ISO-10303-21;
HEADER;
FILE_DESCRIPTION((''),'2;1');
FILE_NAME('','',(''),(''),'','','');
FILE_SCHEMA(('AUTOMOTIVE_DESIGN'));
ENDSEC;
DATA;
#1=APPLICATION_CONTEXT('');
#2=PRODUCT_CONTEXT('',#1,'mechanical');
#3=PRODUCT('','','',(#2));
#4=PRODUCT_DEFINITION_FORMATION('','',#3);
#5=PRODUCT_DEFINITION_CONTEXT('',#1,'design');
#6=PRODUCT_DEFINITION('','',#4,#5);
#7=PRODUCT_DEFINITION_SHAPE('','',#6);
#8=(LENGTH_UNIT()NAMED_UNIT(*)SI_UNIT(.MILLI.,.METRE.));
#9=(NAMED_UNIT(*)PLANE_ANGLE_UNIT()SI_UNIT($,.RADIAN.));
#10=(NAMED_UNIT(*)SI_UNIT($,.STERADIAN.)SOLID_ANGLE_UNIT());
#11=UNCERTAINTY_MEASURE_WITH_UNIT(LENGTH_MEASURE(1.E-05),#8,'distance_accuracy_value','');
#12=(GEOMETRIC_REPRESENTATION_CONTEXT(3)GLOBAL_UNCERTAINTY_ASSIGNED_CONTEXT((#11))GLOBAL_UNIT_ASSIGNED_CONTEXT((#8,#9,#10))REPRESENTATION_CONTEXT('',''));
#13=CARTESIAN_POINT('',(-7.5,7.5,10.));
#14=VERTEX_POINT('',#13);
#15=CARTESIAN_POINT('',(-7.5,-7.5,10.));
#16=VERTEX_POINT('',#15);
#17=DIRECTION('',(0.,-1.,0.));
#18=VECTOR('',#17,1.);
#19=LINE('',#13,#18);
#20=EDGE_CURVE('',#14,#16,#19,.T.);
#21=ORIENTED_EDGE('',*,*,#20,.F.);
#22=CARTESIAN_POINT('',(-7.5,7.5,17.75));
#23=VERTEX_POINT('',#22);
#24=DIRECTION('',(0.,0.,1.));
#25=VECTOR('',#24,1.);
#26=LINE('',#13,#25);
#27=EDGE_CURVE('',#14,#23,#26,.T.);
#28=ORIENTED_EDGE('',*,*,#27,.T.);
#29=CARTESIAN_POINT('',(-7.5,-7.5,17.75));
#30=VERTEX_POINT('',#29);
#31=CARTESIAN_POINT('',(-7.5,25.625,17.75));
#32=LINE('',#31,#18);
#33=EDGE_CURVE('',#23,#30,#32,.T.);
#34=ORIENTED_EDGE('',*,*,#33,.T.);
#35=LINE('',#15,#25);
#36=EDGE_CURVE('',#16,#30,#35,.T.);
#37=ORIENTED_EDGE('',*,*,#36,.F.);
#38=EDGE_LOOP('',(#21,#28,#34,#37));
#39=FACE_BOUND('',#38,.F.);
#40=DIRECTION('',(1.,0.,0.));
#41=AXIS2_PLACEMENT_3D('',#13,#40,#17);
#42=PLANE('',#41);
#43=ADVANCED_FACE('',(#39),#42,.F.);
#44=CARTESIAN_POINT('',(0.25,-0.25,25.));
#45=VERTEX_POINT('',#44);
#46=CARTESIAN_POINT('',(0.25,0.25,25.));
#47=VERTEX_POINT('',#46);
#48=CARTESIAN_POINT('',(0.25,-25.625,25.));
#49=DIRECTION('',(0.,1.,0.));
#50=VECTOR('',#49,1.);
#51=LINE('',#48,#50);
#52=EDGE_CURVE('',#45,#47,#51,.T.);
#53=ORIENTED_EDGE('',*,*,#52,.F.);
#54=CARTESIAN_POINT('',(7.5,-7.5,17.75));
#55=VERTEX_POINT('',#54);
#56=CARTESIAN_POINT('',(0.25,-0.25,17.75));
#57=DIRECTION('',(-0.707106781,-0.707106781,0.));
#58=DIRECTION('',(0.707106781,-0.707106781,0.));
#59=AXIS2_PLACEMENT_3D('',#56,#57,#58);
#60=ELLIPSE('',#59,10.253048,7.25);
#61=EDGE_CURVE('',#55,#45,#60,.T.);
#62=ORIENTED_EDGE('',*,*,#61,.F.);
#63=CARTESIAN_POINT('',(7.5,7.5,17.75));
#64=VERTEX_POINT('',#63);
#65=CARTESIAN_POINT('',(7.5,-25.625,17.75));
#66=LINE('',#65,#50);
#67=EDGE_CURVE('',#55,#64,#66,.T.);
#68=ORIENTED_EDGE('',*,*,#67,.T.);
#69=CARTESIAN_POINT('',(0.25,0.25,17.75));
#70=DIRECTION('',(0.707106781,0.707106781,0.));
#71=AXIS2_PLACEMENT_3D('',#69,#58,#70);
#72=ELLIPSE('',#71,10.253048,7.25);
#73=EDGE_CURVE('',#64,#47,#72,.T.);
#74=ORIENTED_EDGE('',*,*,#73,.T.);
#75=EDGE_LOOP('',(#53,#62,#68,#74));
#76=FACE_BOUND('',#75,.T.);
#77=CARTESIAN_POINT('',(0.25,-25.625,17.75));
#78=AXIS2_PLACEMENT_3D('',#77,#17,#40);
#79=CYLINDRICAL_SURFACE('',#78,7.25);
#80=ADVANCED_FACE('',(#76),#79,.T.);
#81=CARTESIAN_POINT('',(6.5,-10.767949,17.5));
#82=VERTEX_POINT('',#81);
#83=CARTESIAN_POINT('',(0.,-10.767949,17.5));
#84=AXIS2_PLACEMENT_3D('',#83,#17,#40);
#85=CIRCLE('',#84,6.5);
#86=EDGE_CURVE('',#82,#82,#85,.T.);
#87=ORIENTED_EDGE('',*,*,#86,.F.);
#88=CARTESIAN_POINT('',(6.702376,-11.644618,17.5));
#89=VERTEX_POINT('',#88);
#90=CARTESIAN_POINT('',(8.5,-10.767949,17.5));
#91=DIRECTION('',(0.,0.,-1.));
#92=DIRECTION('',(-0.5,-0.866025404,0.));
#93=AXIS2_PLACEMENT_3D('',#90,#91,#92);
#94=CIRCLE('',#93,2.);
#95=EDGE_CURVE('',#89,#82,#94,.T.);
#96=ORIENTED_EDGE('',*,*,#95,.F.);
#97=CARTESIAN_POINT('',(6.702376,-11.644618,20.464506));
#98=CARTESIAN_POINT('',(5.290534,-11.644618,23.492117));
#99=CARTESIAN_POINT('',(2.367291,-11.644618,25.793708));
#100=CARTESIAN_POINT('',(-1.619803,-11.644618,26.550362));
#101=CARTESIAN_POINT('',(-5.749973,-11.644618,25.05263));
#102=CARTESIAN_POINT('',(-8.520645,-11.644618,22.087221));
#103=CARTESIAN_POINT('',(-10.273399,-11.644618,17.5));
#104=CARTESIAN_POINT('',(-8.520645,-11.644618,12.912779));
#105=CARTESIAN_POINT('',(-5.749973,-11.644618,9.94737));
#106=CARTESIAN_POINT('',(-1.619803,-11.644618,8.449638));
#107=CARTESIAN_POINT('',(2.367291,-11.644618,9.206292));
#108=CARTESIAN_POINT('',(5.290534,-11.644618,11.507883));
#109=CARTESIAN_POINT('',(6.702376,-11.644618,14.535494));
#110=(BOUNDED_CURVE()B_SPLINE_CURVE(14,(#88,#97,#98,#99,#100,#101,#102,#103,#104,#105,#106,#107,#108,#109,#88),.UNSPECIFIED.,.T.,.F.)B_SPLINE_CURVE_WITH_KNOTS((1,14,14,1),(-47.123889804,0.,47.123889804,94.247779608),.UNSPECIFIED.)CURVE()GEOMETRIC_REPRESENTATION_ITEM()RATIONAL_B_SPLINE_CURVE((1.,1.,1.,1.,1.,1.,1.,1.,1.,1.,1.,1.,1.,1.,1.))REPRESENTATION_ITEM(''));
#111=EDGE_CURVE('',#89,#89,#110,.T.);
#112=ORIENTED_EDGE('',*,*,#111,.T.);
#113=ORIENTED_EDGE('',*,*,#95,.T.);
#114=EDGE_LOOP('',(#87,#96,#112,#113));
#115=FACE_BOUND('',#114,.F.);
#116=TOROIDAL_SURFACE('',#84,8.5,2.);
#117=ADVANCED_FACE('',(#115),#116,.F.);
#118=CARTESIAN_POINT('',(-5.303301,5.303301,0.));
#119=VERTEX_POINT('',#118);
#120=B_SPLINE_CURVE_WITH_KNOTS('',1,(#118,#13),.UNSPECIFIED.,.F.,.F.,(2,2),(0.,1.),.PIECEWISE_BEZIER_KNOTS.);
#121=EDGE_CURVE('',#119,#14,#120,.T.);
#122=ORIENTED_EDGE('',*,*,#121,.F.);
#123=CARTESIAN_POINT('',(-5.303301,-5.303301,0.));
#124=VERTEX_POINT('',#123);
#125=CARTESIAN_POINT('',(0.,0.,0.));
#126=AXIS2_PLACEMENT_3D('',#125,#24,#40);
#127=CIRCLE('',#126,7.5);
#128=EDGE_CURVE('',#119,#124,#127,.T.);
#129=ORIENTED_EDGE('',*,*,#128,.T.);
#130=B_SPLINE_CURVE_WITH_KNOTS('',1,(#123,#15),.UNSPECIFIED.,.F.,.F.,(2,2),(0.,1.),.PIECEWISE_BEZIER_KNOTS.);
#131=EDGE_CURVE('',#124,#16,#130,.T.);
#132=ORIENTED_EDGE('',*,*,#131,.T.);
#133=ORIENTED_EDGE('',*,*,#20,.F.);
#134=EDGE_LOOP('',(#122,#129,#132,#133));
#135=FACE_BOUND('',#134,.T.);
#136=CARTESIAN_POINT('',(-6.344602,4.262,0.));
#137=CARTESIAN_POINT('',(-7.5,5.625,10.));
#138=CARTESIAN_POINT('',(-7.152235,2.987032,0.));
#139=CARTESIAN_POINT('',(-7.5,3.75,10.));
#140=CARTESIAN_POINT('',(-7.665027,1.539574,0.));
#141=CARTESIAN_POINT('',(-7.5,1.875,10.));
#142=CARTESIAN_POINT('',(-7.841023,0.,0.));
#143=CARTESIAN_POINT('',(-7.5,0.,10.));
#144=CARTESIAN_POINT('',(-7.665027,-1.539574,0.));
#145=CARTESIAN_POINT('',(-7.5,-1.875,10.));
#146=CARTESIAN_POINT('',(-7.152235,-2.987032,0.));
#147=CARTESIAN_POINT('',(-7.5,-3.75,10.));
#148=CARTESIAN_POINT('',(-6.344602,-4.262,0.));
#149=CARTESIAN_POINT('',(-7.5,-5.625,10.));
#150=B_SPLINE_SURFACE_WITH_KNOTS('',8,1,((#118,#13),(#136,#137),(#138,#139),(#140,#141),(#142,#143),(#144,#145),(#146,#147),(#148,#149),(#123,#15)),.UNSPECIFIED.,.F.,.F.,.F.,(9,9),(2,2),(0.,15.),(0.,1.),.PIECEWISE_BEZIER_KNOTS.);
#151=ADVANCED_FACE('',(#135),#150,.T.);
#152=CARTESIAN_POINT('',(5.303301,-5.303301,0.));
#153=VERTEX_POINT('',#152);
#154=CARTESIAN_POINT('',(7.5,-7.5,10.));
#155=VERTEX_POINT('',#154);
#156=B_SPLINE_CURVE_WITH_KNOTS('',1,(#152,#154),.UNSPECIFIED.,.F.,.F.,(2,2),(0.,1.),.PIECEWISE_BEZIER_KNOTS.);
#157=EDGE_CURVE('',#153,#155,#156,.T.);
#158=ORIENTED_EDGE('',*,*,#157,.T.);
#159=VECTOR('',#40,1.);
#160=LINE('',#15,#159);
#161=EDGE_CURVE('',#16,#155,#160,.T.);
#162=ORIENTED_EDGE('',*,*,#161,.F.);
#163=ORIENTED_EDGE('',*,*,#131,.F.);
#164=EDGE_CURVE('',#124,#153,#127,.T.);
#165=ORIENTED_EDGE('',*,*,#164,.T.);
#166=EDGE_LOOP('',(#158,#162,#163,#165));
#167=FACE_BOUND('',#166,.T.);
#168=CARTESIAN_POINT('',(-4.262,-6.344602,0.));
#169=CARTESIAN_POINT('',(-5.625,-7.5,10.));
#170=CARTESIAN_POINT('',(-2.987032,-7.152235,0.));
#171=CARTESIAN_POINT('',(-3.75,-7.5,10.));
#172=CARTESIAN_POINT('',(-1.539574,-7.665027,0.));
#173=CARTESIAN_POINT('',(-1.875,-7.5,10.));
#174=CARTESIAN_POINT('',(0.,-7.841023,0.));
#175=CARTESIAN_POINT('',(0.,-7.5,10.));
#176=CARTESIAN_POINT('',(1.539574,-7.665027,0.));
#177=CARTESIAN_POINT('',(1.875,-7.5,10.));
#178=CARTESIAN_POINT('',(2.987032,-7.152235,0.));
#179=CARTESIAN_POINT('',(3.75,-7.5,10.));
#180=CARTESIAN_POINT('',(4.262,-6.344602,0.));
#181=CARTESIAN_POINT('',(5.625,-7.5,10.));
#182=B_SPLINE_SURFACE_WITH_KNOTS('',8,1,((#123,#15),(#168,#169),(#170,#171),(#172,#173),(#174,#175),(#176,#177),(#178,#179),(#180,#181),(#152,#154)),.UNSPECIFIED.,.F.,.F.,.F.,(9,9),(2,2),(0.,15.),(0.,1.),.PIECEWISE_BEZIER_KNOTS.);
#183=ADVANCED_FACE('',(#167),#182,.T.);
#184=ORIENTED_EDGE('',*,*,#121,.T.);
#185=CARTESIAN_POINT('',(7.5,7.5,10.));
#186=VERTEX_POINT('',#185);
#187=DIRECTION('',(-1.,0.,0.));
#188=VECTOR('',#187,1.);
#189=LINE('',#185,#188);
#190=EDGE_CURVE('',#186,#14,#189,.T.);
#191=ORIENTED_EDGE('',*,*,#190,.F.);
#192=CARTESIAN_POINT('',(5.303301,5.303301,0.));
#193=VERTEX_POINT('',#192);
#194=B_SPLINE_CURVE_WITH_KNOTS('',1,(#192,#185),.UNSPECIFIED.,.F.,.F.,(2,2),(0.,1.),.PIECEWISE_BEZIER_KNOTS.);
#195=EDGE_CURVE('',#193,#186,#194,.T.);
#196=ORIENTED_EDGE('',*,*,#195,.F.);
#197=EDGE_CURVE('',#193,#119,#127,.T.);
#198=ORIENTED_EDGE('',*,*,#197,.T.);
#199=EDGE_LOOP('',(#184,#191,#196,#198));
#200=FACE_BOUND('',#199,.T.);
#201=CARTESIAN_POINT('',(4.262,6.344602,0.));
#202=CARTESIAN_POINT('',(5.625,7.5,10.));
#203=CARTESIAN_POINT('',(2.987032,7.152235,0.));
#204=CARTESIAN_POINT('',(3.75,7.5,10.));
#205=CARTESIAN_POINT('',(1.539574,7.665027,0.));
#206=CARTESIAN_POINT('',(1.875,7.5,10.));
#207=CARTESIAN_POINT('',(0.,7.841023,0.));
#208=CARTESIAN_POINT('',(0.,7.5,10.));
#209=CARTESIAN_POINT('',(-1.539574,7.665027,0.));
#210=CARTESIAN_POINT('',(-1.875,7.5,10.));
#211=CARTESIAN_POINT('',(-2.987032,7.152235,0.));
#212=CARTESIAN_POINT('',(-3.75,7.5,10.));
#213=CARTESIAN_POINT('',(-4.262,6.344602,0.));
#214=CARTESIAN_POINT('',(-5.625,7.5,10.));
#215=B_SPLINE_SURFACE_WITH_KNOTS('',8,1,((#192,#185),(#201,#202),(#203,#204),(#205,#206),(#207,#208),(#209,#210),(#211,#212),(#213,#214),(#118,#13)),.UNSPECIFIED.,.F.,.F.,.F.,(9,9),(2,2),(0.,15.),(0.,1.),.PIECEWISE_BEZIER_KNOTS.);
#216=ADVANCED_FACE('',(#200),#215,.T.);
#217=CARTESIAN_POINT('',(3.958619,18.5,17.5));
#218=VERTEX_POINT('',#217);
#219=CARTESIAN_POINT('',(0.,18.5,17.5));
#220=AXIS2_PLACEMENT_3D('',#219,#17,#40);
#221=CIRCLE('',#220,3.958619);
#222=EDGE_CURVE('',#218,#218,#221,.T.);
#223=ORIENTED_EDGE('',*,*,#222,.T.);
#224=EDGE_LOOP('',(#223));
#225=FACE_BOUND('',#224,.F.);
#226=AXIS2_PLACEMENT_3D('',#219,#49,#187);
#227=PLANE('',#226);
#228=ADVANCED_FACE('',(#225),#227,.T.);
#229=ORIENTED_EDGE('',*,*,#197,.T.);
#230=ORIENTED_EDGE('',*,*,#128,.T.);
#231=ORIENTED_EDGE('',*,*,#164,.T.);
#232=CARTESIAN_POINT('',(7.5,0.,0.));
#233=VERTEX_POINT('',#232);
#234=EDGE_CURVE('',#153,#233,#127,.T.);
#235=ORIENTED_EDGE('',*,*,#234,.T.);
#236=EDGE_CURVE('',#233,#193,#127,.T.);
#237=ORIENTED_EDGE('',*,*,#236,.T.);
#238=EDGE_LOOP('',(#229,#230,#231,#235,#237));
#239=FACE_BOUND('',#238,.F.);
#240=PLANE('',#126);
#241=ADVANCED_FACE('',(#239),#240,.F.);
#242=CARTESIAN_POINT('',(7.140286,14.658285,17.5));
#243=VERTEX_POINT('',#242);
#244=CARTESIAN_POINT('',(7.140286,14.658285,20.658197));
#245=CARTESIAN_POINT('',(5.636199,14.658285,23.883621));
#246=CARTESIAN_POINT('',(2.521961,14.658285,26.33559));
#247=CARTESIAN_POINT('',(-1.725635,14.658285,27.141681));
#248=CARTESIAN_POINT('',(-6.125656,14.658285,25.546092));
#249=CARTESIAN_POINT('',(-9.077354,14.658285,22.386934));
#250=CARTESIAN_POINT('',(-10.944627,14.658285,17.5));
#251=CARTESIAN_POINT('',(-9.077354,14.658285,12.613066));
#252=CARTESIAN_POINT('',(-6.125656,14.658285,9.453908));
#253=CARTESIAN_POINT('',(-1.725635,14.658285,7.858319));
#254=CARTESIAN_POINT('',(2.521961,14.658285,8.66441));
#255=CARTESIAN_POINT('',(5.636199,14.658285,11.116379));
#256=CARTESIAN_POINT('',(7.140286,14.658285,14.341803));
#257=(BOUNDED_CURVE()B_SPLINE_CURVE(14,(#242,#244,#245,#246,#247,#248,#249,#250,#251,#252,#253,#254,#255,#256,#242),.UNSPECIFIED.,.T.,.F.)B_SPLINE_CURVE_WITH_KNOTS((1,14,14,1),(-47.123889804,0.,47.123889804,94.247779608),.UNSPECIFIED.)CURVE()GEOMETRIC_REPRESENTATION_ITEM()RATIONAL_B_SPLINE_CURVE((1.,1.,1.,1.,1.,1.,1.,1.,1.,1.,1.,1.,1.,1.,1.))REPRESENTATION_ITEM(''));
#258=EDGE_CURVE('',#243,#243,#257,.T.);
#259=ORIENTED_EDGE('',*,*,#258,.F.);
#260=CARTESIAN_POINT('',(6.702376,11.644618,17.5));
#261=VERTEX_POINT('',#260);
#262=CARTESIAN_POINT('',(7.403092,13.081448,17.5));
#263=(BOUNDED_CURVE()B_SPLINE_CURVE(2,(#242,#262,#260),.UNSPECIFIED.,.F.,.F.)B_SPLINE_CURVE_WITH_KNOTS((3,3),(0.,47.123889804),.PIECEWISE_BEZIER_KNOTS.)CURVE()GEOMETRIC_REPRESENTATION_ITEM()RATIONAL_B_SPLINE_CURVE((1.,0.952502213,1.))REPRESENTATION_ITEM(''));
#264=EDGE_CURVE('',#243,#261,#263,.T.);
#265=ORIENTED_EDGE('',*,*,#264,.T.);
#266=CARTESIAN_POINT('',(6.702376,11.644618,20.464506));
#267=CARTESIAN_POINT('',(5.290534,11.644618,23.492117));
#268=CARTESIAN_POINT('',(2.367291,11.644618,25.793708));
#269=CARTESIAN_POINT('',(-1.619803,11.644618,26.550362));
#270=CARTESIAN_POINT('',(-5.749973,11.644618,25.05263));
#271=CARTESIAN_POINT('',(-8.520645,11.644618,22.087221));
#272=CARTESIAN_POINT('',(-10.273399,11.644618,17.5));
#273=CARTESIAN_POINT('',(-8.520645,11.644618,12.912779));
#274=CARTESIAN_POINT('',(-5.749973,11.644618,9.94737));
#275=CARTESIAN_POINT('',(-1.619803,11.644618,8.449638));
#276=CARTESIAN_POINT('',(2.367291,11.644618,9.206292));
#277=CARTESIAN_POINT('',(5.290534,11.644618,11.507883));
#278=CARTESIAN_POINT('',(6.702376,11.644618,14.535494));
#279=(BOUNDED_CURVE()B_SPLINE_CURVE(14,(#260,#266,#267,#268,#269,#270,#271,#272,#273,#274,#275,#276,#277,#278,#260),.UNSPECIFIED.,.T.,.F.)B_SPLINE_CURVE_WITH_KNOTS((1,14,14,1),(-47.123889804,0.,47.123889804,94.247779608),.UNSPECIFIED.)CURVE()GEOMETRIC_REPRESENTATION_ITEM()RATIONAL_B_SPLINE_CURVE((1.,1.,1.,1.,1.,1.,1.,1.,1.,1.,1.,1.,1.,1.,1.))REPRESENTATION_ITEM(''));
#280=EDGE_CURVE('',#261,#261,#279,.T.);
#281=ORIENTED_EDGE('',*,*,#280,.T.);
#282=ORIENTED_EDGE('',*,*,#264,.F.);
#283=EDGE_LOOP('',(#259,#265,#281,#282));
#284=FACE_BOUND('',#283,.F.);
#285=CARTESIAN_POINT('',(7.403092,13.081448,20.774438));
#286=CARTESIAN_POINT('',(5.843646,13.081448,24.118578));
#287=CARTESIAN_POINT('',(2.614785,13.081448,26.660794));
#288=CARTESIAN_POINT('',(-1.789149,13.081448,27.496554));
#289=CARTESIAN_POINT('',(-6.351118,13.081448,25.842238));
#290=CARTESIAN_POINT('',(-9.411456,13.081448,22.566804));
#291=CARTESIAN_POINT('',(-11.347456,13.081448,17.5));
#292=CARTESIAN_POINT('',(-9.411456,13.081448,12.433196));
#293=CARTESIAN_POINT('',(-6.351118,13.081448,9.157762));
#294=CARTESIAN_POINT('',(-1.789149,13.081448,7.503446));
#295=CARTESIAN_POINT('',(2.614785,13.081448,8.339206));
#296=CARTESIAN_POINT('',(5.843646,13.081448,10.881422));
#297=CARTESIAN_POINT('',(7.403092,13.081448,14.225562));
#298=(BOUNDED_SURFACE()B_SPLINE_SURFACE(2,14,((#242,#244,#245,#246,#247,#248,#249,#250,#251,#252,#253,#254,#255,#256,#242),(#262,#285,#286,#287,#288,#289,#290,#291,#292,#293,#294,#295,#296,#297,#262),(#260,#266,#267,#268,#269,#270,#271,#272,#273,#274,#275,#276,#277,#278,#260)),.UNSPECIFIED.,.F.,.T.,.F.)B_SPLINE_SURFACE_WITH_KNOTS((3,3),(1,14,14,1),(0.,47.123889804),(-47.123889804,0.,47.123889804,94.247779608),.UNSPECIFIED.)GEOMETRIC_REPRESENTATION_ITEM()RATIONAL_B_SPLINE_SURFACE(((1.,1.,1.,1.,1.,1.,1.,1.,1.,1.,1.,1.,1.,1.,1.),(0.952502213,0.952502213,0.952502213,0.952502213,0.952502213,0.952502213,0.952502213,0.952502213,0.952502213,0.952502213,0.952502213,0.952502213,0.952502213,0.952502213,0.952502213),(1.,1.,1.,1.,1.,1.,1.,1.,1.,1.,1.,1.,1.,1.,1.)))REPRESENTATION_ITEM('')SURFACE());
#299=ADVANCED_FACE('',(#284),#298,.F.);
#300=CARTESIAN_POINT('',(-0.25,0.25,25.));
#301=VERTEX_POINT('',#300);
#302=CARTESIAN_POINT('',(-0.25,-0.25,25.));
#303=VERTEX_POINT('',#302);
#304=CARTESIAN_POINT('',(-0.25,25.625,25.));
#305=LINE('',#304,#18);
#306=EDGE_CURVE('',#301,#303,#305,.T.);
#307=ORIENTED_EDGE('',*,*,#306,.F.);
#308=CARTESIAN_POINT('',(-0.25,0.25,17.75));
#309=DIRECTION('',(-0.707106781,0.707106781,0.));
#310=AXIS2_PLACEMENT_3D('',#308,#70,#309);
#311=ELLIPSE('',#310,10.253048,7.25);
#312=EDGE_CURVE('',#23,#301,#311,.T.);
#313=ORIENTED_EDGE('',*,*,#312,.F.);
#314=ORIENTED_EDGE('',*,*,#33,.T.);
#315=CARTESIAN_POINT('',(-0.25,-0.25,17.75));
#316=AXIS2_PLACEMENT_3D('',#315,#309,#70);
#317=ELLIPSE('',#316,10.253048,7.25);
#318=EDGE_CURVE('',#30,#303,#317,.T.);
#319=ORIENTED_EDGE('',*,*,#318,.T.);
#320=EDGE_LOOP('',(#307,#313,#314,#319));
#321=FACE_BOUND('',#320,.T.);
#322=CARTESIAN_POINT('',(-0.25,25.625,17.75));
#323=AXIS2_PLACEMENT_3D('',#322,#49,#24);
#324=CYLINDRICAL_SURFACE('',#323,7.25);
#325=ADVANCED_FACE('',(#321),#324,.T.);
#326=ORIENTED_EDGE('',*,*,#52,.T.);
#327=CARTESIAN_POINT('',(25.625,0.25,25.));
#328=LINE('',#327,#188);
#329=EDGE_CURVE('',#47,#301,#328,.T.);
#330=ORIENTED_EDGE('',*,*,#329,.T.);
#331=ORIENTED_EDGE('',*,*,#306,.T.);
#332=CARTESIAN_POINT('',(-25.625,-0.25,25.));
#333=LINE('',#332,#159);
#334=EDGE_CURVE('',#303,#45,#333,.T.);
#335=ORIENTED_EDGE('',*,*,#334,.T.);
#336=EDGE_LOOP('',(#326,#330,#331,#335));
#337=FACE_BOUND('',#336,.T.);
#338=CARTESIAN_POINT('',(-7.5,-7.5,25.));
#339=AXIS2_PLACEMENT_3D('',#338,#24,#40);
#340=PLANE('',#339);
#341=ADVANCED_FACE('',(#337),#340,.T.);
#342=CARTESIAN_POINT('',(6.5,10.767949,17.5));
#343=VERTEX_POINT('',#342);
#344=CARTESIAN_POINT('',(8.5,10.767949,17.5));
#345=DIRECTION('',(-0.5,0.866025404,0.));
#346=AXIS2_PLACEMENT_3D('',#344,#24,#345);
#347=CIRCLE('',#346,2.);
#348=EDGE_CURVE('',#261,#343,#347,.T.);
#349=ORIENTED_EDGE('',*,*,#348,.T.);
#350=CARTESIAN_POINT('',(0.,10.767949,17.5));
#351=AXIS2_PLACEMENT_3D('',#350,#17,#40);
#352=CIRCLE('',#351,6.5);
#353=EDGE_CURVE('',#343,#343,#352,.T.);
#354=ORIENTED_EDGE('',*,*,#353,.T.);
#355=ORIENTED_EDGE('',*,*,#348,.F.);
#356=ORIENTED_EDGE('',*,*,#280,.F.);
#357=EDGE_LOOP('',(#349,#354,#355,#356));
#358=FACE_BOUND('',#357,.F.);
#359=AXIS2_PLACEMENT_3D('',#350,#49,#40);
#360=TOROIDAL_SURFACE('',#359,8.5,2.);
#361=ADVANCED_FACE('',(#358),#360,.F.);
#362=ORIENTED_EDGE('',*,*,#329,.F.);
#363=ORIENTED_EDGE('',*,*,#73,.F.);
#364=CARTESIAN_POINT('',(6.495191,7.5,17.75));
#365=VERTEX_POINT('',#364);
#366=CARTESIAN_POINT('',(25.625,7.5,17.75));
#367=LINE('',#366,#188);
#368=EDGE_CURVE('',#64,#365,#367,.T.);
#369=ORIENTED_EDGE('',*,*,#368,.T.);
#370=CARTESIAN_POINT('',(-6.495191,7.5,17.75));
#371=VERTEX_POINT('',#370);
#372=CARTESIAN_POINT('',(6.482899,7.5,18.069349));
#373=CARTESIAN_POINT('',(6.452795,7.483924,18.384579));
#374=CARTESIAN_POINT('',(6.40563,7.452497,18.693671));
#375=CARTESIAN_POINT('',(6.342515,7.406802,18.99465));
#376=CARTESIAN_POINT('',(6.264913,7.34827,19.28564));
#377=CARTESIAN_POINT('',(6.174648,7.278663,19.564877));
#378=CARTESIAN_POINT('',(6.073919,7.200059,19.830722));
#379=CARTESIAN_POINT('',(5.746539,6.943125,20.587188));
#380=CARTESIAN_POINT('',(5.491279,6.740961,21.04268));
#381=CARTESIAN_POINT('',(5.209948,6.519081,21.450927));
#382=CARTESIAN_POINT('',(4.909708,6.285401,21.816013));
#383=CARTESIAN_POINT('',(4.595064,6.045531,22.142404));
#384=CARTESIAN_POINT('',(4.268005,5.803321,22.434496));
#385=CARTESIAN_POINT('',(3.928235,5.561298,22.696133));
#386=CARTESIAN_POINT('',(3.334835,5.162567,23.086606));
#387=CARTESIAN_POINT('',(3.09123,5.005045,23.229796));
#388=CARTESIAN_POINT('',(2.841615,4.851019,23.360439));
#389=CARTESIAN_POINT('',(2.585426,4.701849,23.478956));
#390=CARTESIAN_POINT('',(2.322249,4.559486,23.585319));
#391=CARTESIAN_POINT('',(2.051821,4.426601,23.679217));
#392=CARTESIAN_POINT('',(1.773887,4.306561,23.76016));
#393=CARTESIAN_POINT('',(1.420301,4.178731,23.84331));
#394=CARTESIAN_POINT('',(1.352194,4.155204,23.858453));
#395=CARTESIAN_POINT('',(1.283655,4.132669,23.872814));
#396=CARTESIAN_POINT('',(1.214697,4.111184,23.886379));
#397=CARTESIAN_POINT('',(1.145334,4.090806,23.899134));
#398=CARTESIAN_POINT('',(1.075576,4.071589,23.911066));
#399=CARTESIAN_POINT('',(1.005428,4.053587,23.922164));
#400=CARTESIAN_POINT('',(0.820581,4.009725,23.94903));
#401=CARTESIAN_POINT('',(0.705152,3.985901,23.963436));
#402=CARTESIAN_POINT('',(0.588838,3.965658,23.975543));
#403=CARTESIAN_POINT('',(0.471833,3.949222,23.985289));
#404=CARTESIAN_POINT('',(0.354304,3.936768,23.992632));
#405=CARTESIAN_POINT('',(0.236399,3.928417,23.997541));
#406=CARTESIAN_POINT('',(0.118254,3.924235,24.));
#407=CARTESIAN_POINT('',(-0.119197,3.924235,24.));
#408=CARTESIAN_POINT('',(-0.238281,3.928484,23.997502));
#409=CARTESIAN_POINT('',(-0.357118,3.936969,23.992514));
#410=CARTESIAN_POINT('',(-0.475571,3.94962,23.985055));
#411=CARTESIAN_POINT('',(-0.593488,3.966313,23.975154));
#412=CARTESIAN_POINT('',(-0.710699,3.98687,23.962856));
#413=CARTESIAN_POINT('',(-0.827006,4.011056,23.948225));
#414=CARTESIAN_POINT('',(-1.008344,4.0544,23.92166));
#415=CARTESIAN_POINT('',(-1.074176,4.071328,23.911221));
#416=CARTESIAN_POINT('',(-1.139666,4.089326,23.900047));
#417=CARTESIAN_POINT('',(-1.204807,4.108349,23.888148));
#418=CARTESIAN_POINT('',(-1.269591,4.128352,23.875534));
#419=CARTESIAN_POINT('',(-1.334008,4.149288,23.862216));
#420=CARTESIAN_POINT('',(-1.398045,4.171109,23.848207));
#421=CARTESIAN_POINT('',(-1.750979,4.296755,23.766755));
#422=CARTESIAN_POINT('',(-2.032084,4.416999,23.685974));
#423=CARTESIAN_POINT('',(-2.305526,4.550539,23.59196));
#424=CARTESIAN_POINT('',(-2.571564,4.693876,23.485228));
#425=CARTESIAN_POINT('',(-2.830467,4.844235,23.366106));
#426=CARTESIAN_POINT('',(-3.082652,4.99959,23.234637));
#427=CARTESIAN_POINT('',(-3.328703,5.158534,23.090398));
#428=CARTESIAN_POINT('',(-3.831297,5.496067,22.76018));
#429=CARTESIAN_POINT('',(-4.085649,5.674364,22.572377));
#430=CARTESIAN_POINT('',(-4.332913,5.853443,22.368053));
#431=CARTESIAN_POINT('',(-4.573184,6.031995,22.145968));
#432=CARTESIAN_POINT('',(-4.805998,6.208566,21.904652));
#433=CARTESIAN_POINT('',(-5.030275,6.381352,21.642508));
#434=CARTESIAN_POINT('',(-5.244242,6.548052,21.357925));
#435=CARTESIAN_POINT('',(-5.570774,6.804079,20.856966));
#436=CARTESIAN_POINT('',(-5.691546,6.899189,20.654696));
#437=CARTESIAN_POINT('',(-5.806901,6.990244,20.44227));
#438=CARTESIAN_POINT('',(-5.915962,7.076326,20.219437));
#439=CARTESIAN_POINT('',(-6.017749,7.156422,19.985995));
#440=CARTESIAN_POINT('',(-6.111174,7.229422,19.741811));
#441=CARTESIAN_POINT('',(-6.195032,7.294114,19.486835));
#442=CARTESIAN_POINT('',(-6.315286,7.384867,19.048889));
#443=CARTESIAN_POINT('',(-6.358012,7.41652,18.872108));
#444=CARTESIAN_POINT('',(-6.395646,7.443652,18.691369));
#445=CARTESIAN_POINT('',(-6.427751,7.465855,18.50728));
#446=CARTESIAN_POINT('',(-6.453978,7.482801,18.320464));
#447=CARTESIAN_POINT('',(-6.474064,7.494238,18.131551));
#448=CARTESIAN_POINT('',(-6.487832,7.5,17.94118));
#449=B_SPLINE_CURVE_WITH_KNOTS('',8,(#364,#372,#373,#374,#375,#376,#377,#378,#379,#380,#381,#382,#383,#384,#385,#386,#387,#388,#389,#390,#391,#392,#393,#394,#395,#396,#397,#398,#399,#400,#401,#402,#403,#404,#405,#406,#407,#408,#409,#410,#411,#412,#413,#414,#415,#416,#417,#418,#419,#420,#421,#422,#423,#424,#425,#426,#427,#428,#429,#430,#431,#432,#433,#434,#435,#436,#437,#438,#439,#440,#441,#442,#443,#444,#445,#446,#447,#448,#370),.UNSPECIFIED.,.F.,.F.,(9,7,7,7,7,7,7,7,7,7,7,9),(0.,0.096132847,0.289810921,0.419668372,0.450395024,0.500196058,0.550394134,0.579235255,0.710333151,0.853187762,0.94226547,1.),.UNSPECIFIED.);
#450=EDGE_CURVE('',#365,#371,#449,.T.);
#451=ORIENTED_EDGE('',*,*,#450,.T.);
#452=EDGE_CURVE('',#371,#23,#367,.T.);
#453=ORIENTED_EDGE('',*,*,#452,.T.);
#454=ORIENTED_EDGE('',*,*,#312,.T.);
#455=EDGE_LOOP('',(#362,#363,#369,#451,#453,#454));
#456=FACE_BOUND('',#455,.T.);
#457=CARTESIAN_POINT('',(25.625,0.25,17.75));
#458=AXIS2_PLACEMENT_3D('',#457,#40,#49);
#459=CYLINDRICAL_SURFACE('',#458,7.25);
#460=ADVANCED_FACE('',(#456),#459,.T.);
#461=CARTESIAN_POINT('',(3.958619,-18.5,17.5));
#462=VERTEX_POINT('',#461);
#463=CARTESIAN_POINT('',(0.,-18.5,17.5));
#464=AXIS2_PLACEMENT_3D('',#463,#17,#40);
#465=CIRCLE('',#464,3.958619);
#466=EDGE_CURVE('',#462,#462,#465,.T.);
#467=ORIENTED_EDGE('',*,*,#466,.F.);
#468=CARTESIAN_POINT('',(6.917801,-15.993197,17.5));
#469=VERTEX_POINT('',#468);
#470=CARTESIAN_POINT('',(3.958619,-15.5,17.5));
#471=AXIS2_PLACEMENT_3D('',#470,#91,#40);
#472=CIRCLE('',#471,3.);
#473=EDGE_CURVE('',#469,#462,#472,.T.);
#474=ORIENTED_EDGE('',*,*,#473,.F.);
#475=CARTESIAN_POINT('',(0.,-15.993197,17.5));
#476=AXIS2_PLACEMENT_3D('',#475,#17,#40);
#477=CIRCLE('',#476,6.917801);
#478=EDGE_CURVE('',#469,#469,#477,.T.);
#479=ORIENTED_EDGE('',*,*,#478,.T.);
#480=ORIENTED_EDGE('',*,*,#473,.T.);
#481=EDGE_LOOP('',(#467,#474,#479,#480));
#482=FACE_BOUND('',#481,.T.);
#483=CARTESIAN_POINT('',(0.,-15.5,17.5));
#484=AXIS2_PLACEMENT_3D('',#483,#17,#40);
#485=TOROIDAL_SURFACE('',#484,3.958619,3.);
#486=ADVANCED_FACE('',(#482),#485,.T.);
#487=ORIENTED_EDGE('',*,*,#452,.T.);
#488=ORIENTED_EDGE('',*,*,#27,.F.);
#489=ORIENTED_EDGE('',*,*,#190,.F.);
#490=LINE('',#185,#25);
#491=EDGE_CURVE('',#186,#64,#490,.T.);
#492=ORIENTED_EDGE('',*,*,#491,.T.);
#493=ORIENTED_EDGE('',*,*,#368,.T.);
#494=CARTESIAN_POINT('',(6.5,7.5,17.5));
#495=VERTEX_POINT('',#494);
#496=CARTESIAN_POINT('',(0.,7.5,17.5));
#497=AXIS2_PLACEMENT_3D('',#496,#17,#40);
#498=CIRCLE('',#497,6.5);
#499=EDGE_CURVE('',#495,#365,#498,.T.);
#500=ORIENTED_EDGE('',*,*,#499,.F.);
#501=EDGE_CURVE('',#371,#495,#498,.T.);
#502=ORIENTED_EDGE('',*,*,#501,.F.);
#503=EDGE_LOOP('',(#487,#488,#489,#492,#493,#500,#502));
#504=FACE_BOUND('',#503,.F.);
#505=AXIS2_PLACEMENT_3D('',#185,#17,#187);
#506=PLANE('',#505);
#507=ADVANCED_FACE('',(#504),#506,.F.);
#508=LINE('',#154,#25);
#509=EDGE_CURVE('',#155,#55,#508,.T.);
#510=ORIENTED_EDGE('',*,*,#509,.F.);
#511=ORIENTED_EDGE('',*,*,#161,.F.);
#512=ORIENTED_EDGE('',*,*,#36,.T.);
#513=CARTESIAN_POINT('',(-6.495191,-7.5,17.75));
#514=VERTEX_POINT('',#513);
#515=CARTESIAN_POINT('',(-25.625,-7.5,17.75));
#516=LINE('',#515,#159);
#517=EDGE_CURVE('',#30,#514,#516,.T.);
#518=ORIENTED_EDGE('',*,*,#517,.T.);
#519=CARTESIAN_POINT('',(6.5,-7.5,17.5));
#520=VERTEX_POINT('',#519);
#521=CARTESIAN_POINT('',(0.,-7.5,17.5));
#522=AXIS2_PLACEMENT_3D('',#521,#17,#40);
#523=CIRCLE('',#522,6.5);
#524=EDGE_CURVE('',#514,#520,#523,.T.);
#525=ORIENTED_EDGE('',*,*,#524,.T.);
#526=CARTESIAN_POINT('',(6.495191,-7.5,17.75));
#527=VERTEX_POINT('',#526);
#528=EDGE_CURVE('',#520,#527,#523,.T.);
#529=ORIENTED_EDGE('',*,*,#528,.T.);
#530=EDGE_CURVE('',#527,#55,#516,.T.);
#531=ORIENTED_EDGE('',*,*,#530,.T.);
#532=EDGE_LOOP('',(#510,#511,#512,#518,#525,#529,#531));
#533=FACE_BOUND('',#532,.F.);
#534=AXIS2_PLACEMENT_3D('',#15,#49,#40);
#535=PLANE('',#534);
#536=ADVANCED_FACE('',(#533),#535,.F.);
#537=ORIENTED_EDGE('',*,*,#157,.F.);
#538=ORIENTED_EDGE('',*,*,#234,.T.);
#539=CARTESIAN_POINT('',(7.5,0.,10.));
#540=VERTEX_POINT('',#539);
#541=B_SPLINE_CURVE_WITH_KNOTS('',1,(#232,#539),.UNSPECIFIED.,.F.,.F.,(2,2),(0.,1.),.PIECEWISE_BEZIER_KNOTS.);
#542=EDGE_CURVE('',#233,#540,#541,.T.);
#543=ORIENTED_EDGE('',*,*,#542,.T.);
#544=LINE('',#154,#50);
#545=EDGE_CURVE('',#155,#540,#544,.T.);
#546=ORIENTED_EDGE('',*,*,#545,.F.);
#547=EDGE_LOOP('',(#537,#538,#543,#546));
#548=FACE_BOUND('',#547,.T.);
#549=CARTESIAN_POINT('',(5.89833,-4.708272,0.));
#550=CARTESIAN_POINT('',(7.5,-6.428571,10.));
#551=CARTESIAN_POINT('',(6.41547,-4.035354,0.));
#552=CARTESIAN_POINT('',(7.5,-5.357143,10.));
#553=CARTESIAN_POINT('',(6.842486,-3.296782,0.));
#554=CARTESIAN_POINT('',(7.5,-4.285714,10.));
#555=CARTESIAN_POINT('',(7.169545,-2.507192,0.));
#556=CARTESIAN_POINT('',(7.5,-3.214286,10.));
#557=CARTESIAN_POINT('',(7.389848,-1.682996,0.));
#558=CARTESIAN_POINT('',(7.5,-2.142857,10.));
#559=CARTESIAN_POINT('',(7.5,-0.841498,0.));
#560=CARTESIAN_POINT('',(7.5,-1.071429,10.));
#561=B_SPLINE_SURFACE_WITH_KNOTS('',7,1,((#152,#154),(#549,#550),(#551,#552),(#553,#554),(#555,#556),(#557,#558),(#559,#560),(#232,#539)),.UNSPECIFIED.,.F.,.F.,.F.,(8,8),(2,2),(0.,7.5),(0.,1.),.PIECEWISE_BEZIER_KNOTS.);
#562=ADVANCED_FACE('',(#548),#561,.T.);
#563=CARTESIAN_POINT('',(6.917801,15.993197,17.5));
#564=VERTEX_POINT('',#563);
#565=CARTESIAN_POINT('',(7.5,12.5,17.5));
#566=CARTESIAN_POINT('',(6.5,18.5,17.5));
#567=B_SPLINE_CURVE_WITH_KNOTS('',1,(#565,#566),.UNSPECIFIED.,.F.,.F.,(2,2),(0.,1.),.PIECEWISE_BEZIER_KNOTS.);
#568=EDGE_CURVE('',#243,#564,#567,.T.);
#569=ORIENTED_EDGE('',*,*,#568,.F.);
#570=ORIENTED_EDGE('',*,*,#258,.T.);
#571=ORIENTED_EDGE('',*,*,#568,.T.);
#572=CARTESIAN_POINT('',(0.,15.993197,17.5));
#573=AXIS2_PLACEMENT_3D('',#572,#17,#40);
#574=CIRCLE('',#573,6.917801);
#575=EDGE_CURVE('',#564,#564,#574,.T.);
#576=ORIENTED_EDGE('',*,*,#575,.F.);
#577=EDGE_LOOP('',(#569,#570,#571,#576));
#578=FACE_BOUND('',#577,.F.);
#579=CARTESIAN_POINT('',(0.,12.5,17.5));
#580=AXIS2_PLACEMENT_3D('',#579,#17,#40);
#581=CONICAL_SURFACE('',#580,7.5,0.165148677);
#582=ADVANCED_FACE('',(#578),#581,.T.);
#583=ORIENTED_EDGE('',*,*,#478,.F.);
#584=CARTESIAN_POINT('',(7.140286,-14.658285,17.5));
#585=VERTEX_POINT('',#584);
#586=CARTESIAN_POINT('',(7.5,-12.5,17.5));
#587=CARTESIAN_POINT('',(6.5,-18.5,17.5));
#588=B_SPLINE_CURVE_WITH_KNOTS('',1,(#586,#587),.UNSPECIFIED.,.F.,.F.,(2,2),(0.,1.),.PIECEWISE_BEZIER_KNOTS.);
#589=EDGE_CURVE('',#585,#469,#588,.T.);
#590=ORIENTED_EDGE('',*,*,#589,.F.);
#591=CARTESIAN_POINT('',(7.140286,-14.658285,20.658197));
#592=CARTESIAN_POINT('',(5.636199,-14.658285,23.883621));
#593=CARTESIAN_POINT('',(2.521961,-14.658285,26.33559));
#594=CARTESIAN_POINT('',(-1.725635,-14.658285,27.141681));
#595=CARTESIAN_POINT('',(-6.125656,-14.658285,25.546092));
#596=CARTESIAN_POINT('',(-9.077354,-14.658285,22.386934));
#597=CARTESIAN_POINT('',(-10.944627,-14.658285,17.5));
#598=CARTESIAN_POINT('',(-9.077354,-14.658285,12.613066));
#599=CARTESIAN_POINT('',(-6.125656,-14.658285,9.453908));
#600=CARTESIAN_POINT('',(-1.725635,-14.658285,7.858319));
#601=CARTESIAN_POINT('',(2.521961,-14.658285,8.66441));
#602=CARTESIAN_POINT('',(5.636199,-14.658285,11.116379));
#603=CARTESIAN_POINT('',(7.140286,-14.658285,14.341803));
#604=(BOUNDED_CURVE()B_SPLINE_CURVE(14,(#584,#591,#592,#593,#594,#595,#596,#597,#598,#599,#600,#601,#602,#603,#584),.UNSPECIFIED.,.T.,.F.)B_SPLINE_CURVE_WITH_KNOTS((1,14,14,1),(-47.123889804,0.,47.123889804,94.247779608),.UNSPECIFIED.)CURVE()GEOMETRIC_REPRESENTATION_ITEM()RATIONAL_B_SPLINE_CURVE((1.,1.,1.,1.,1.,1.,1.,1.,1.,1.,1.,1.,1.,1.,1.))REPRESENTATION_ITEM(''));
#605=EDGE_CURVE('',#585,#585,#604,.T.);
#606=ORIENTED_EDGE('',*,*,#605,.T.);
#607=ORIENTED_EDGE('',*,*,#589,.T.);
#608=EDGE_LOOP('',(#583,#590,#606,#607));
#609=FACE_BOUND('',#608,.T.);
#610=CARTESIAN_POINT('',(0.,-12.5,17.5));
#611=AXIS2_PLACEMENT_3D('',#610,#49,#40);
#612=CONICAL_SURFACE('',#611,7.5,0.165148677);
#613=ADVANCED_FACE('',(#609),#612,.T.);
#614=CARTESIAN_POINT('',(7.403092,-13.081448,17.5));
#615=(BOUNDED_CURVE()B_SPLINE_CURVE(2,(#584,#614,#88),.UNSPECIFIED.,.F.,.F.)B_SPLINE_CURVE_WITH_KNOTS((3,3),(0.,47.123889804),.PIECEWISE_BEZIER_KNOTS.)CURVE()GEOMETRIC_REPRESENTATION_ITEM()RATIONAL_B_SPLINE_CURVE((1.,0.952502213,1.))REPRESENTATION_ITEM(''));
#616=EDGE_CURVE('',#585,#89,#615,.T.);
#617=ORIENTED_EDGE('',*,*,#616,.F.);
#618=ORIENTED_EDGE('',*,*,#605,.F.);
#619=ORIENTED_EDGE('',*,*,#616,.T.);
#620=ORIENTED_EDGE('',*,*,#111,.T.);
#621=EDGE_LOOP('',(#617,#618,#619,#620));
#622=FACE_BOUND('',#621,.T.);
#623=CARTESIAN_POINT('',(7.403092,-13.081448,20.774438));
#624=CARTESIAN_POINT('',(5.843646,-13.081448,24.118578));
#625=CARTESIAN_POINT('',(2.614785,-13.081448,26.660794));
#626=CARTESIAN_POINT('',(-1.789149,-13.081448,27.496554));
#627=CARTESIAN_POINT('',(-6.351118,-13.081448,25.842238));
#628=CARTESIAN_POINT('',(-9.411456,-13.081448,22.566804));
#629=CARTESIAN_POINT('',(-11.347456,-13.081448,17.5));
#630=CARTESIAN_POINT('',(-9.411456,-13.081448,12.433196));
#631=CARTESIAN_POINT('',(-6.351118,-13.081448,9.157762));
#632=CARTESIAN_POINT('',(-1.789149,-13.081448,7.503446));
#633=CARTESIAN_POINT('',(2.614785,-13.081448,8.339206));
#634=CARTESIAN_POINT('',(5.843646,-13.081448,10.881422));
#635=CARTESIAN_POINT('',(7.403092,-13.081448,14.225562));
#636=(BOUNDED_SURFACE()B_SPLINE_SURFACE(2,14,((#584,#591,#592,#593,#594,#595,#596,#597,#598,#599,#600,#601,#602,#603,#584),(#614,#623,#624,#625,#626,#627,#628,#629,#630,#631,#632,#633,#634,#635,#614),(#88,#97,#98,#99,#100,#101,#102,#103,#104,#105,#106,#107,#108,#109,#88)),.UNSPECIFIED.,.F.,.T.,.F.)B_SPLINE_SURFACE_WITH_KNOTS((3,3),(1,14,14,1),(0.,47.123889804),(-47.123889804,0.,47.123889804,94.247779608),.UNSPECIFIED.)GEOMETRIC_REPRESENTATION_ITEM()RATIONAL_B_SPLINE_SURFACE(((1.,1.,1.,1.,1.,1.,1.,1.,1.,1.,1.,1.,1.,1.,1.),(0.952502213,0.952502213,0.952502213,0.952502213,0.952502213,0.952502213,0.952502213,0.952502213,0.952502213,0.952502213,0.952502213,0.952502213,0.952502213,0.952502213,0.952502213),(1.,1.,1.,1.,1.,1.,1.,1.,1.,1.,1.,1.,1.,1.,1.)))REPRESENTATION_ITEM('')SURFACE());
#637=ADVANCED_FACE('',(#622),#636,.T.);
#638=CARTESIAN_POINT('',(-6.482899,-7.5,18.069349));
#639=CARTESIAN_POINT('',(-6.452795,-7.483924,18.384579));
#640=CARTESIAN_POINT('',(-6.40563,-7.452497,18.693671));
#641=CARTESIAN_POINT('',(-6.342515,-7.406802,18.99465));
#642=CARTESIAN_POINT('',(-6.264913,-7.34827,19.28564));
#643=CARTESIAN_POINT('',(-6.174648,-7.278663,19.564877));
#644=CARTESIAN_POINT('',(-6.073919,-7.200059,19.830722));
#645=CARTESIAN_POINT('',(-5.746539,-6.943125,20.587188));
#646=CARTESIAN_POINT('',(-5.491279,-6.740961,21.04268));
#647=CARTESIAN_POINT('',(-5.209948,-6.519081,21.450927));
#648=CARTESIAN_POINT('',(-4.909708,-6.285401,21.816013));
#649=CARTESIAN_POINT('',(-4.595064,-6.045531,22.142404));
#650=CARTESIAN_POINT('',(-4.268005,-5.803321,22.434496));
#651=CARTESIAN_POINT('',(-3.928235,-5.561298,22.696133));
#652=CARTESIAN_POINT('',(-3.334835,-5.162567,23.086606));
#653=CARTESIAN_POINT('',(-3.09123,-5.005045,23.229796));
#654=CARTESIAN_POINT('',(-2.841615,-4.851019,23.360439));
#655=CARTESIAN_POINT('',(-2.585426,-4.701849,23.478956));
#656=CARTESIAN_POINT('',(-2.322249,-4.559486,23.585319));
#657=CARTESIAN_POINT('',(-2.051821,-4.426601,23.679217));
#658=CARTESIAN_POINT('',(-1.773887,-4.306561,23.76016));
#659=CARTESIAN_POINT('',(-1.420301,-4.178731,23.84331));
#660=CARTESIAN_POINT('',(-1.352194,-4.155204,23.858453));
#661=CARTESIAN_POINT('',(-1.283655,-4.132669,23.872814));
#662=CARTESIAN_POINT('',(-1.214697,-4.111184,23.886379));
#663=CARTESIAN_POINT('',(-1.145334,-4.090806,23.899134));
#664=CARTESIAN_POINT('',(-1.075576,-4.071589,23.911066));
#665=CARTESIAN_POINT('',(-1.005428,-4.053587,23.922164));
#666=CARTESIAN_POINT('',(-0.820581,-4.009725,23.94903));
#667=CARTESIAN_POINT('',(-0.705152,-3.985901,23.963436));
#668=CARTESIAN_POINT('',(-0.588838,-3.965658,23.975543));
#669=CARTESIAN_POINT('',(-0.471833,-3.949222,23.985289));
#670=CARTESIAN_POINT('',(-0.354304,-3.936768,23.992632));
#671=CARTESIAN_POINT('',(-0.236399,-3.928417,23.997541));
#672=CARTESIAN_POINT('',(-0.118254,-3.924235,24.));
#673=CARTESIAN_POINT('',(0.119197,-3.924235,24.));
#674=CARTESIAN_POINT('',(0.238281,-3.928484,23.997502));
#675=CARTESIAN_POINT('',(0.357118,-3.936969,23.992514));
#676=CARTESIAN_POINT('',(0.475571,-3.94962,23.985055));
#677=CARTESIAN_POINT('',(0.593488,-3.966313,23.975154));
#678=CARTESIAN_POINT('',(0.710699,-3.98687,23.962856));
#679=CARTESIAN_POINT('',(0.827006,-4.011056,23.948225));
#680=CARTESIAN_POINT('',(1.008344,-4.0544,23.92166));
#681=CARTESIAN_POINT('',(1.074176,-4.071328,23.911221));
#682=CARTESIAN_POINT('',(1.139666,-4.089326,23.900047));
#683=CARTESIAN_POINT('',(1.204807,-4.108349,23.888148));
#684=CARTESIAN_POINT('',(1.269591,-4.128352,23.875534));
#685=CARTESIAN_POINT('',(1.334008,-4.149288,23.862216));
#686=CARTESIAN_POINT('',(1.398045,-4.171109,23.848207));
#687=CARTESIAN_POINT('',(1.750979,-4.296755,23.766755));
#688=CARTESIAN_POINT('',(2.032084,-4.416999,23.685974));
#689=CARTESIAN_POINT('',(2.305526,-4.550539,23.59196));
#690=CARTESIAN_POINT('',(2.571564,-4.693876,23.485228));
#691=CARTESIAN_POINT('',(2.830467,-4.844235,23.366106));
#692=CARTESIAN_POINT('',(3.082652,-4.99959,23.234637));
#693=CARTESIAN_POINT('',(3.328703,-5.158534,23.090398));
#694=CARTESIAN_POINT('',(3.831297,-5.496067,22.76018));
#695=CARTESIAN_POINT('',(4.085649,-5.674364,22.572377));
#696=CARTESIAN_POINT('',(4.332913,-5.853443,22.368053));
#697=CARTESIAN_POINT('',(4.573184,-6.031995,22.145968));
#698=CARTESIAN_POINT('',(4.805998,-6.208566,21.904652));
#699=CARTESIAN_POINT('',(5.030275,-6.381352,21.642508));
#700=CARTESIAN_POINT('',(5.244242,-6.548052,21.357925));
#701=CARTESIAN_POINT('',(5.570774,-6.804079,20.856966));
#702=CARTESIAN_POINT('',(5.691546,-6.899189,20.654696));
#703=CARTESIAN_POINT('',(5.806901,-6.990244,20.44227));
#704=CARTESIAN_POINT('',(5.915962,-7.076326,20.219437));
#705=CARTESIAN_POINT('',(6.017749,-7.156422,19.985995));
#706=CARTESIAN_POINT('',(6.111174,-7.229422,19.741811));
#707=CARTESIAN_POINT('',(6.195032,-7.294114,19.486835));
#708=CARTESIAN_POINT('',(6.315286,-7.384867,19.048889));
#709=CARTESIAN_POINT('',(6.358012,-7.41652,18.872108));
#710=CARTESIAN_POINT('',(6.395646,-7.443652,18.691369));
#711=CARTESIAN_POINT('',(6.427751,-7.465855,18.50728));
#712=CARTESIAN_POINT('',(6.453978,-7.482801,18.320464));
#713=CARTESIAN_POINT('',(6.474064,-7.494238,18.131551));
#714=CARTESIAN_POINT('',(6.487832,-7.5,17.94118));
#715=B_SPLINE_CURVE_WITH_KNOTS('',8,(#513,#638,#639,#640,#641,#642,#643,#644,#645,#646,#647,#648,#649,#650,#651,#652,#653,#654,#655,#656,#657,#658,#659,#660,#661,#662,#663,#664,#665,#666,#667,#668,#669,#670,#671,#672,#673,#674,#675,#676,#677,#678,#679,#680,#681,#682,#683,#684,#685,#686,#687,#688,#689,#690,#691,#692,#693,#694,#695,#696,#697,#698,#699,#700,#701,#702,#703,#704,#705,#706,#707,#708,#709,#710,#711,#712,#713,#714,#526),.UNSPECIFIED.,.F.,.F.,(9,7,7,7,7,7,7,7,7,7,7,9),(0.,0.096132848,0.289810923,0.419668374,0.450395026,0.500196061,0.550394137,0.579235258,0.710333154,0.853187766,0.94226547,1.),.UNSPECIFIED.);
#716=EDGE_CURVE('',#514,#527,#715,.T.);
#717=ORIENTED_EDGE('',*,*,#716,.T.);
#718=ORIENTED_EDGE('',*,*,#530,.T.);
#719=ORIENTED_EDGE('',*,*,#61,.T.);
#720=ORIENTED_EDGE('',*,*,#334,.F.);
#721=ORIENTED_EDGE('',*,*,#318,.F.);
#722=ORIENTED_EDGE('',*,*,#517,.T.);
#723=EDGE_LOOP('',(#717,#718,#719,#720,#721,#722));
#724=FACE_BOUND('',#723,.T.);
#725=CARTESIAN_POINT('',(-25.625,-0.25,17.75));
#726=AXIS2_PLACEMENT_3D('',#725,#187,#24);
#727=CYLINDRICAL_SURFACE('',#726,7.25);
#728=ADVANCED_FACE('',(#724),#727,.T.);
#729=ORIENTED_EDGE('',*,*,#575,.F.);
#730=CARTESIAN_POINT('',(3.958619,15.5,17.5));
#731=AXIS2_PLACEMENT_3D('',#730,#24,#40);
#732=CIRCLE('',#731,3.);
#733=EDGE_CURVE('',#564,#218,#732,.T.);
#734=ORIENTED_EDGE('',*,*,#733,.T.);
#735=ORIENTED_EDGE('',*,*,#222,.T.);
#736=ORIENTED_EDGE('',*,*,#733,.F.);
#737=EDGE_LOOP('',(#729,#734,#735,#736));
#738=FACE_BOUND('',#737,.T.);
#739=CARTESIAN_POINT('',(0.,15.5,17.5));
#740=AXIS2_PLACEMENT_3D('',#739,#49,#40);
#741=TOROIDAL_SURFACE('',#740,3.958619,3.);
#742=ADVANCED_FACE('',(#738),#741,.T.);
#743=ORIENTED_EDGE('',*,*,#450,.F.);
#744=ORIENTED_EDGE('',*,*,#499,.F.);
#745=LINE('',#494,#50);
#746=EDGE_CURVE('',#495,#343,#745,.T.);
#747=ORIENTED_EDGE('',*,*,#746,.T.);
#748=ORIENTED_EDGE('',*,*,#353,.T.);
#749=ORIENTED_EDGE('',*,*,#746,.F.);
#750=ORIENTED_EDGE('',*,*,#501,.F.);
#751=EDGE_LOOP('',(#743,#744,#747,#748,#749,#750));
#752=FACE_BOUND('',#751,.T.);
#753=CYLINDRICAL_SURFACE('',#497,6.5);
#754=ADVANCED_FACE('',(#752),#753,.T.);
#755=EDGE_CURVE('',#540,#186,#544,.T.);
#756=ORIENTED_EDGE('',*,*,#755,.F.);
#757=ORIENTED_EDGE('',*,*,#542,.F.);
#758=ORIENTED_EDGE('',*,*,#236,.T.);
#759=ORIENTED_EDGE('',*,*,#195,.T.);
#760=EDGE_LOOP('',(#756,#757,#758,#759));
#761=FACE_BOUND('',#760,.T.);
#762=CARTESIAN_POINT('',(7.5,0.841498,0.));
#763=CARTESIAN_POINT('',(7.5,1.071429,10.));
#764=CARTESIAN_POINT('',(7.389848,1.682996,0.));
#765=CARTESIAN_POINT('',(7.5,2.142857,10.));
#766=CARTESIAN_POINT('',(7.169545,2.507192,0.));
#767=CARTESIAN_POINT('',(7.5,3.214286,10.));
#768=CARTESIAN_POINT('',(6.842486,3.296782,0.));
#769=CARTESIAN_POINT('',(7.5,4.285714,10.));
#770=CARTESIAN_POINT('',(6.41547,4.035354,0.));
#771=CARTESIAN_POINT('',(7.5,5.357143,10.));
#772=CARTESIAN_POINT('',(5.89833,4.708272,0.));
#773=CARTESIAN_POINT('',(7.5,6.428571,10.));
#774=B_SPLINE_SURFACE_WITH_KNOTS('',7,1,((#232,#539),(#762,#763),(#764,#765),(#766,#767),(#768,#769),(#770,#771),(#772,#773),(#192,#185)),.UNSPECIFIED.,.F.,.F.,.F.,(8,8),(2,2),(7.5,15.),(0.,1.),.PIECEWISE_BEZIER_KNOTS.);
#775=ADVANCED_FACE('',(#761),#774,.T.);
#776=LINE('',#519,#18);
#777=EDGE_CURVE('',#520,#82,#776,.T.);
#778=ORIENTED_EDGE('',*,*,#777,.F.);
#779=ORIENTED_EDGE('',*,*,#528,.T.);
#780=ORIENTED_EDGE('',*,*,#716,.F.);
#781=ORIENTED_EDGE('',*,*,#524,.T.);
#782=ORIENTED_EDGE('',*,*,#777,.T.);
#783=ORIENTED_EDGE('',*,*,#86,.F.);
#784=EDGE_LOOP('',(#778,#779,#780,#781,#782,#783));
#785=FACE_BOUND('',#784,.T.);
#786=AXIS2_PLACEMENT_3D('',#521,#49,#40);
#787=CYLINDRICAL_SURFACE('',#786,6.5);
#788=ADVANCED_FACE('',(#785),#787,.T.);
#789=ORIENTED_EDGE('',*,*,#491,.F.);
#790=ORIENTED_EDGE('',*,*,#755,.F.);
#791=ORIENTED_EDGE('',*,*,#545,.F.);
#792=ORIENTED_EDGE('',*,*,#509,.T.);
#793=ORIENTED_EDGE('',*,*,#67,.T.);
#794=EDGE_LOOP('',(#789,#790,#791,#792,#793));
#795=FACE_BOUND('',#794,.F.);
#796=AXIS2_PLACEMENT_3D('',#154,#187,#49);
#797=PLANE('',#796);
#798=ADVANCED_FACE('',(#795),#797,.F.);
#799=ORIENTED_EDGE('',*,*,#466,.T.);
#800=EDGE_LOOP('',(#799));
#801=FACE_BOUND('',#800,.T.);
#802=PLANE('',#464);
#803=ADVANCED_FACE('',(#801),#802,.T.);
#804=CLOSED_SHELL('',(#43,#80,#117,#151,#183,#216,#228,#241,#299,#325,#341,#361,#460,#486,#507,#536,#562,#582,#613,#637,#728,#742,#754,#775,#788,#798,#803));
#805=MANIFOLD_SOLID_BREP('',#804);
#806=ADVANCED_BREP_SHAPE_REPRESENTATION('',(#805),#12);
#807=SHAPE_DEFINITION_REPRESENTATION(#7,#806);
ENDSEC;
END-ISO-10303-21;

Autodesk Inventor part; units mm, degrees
sketch "Sketch2" plane through (0, 0, 0) normal (0, 0, 1) x (1, 0, 0)
  circle A0 centre (0, 0) radius 7.5
  dimension "d1" = 15
ref_plane "Work Plane1" through (0, 0, 10) normal (0, 0, 1) x (1, 0, 0)
sketch "Sketch3" plane through (0, 0, 10) normal (0, 0, 1) x (1, 0, 0)
  line L0 (-7.5, -7.5) -> (7.5, -7.5)
  line L1 (7.5, -7.5) -> (7.5, 7.5)
  line L2 (7.5, 7.5) -> (-7.5, 7.5)
  line L3 (-7.5, 7.5) -> (-7.5, -7.5)
  line L4 (-7.5, -7.5) -> (7.5, 7.5) construction
  line L5 (7.5, -7.5) -> (-7.5, 7.5) construction
  point P0 (0, 0)
  dimension "d5" = 15
  dimension "d6" = 15
loft "Loft1" add profiles "Sketch2", "Sketch3"
sketch "Sketch4" plane through (-7.5, -7.5, 10) normal (0, 0, 1) x (1, 0, 0)
  line L0 (12.8033, 12.8033) -> (15, 15) projected
  line L1 (0, 0) -> (15, 0)
  line L2 (15, 0) -> (15, 15)
  line L3 (15, 15) -> (0, 15)
  line L4 (0, 15) -> (0, 0)
  line L5 (0, 0) -> (15, 15) construction
  line L6 (15, 0) -> (0, 15) construction
  point P0 (7.5, 7.5)
  dimension "d11" = 15
  dimension "d12" = 15
extrude "Extrusion2" add sketch "Sketch4" along normal blind 15
sketch "Sketch5" plane through (-7.5, -7.5, 25) normal (0, -1, 0) x (1, 0, 0)
  circle A0 centre (7.5, -7.5) radius 6.5
  point P0 (7.5, -25)
  point P1 (15, -15)
  dimension "d15" = 13
extrude "Extrusion3" add sketch "Sketch5" along normal blind 5
sketch "Sketch6" plane through (0, -12.5, 17.5) normal (0, -1, 0) x (1, 0, 0)
  circle A0 centre (0, 0) radius 7.5
  point P0 (0, -17.5)
  dimension "d24" = 15
ref_plane "Work Plane2" through (0, -18.5, 17.5) normal (0, -1, 0) x (1, 0, 0)
sketch "Sketch7" plane through (0, -18.5, 17.5) normal (0, -1, 0) x (1, 0, 0)
  circle A0 centre (0, 0) radius 6.5
  point P0 (0, -17.5)
loft "Loft2" add profiles "Sketch6", "Sketch7"
fillet "Fillet1" radius 2 1 edges at (-6.5, -12.5, 17.5)
fillet "Fillet2" radius 3 1 edges at (-6.5, -18.5, 17.5)
fillet "Fillet3" radius 5 1 edges at (-7.5, -12.5, 17.5)
ref_plane "Work Plane3" through (-7.5, 0, 25) normal (0, -1, 0) x (1, 0, 0)
mirror "Mirror1" about plane through (-7.5, 0, 25) normal (0, -1, 0) of "Fillet2", "Loft2", "Fillet3", "Fillet1", "Extrusion3"
fillet "Fillet4" radius 7.25 4 edges at (-7.5, 0, 25) (0, 7.5, 25) (7.5, 0, 25) (0, -7.5, 25)
properties part number "Palu"
